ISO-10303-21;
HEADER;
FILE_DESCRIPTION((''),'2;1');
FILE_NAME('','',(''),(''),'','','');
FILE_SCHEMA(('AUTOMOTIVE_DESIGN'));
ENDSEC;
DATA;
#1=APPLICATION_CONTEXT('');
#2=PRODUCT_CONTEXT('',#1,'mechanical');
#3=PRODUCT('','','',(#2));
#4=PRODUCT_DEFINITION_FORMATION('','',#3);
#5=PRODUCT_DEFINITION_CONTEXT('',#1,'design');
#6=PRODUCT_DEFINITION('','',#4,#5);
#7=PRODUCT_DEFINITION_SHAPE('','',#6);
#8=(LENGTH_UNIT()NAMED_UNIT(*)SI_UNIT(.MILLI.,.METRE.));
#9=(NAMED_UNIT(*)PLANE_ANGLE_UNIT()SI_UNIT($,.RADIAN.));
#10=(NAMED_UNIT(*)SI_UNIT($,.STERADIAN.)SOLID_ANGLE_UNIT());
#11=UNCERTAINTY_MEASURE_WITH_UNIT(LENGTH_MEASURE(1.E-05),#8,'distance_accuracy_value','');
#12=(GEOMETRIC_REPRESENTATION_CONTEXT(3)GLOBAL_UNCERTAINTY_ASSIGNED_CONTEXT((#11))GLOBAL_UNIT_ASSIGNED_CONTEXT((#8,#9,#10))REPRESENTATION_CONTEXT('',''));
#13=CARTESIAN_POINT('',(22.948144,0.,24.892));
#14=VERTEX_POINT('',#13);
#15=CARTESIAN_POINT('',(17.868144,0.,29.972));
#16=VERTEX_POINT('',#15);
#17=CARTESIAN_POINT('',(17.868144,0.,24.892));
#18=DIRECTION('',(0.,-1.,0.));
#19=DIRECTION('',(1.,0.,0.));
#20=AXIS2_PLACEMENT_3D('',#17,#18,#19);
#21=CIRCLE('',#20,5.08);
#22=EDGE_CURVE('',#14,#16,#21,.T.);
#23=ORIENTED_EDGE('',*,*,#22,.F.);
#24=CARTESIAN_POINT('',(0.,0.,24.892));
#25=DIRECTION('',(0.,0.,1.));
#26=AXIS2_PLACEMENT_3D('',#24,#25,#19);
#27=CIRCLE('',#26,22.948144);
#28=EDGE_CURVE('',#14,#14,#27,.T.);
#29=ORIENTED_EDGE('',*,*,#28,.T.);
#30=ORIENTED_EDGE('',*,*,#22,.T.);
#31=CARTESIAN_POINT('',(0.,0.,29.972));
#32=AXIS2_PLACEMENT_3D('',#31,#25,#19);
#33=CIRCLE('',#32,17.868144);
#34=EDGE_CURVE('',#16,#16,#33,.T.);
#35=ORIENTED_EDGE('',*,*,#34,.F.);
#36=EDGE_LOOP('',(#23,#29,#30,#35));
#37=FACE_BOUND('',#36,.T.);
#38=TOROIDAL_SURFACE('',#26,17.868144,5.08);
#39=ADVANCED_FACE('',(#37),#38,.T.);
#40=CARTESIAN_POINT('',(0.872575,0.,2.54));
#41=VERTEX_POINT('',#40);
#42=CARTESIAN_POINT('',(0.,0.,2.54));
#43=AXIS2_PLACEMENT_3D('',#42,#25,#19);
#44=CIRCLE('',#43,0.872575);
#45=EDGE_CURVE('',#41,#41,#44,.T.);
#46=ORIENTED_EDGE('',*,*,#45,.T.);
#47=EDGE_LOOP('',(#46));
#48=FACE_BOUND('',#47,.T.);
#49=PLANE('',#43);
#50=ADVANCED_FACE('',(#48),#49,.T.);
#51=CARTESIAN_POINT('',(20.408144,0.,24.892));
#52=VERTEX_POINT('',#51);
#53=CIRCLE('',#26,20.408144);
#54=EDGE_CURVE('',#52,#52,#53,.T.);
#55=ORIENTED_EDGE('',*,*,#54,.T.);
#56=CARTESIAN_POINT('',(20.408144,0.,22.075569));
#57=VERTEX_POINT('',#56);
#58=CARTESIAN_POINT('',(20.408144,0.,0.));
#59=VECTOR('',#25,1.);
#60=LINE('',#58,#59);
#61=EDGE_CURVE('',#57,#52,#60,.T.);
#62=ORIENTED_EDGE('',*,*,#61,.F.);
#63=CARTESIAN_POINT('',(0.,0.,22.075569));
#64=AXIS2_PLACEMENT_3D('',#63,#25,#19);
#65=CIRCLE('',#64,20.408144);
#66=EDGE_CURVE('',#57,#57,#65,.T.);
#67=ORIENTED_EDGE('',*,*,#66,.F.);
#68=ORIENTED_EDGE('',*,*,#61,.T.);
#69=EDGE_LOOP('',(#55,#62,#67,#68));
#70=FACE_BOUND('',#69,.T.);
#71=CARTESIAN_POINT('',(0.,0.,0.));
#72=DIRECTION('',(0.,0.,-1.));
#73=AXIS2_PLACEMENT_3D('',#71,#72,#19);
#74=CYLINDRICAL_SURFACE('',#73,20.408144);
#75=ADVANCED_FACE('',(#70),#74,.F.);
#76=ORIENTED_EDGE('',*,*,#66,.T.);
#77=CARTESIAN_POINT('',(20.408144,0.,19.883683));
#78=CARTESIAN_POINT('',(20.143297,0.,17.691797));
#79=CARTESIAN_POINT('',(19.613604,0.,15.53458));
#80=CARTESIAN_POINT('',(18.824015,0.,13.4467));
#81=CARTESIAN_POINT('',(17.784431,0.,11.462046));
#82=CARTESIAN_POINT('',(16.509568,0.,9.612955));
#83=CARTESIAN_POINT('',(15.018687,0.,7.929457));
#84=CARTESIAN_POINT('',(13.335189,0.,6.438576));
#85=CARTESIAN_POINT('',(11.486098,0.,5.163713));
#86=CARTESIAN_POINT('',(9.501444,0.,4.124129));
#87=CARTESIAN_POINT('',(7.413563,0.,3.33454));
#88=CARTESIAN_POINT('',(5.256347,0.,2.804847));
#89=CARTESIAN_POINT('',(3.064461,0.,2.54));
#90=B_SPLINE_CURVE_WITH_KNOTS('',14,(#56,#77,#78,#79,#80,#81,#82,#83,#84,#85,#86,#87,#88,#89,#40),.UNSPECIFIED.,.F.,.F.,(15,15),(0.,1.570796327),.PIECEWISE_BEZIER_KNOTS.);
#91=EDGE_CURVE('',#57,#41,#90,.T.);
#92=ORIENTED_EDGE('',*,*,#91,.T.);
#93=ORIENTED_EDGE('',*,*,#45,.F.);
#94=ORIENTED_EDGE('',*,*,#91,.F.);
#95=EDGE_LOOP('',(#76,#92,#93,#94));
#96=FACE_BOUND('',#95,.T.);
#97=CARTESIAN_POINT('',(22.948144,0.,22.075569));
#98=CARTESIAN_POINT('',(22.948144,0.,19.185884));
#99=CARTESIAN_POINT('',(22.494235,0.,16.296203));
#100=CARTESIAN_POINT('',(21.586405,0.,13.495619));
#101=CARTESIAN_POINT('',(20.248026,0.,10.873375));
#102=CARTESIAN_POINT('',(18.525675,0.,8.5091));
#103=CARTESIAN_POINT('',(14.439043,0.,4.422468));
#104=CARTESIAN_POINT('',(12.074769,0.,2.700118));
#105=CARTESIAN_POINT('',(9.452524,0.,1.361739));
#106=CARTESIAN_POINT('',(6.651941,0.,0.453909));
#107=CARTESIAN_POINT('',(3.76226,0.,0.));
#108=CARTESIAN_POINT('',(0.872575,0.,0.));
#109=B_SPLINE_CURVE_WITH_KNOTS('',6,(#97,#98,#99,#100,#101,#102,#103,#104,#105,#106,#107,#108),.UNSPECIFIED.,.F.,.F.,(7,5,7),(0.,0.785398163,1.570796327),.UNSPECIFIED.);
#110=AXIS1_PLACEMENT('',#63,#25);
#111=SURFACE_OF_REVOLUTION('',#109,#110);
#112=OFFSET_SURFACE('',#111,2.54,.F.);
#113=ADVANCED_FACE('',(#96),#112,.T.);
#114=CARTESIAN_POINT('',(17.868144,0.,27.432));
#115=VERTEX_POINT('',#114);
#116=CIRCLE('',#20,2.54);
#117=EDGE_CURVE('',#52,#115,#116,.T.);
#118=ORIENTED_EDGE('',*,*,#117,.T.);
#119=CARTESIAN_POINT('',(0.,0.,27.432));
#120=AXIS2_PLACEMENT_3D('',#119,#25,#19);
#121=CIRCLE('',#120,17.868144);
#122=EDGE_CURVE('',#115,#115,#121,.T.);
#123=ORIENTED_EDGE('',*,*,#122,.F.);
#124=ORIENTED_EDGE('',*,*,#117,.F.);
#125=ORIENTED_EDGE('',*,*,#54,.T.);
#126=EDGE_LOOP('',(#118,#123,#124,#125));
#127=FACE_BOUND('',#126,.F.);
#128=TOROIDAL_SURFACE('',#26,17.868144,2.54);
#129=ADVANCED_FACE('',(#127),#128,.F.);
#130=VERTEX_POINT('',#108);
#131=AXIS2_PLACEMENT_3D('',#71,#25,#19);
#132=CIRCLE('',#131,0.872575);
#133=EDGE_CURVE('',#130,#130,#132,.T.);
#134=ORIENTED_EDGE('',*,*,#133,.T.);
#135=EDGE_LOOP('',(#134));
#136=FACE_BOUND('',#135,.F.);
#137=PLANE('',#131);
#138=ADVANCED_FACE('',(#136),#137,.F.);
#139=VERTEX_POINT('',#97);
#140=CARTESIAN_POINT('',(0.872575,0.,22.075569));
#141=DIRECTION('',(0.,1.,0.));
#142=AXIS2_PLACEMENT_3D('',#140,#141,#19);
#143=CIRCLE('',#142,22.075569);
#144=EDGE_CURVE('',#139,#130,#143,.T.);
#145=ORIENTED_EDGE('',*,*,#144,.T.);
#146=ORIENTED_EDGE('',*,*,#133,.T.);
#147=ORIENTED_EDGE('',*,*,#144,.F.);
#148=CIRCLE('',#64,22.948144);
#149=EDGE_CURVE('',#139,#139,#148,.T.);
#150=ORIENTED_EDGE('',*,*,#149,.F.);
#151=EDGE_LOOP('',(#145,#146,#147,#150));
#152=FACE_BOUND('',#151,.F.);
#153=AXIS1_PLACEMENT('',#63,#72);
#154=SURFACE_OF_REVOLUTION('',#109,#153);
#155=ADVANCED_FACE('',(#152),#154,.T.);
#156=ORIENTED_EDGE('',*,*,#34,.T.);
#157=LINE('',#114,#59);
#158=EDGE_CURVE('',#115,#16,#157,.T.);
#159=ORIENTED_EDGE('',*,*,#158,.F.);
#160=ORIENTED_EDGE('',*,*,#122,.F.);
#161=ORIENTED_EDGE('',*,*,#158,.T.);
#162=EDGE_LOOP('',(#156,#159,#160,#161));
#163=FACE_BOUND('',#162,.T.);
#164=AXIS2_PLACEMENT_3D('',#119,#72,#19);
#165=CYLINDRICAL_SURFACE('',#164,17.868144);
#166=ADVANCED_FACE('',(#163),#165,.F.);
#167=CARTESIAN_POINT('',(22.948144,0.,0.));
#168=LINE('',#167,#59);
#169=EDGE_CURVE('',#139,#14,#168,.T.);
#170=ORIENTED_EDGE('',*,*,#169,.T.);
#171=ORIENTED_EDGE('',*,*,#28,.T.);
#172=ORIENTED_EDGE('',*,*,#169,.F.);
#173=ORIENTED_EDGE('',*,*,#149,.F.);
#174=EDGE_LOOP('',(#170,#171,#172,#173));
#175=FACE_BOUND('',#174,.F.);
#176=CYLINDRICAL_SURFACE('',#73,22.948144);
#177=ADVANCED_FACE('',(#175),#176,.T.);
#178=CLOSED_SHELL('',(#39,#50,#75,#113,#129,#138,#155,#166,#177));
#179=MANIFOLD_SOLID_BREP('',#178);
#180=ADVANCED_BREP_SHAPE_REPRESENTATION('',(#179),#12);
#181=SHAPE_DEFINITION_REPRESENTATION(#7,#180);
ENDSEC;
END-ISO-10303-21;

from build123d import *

# Parameters (mm, degrees)
F0_R     = 22.9481438371
F1_DEPTH = 29.972
F2_R     = 5.08
F3_R     = 22.0755688143
F4_T     = -2.54


# Not quite as in the source:
# - a shell that OpenCascade refuses in one call is made with other operations: the cavity is built on its own and cut out


with BuildPart() as f1:
    # F0 (on Top) → F1 (new body)
    with BuildSketch(Plane.XY):
        Circle(F0_R)
    extrude(amount=F1_DEPTH)

    # F2
    f2_edges = [f1.edges().sort_by_distance(p)[0] for p in [
        (-22.948144, 0, 29.972),
    ]]
    fillet(f2_edges, radius=F2_R)

    # F3
    f3_edges = [f1.edges().sort_by_distance(p)[0] for p in [
        (-22.948144, 0, 0),
    ]]
    fillet(f3_edges, radius=F3_R)

    # F4: a shell. OpenCascade refuses it in one call, so the cavity is built on its own and cut out:
    # the body offset inwards by the wall thickness, plus a prism from it out through each open face.
    f4_core = offset(f1.part, amount=F4_T, mode=Mode.PRIVATE)
    f4_exits = [f4_core.faces().sort_by_distance(p)[0] for p in [
        (0, 0, 27.432),
    ]]
    add(f4_core, mode=Mode.SUBTRACT)
    extrude(f4_exits, amount=-F4_T, mode=Mode.SUBTRACT)


solid = f1.part
